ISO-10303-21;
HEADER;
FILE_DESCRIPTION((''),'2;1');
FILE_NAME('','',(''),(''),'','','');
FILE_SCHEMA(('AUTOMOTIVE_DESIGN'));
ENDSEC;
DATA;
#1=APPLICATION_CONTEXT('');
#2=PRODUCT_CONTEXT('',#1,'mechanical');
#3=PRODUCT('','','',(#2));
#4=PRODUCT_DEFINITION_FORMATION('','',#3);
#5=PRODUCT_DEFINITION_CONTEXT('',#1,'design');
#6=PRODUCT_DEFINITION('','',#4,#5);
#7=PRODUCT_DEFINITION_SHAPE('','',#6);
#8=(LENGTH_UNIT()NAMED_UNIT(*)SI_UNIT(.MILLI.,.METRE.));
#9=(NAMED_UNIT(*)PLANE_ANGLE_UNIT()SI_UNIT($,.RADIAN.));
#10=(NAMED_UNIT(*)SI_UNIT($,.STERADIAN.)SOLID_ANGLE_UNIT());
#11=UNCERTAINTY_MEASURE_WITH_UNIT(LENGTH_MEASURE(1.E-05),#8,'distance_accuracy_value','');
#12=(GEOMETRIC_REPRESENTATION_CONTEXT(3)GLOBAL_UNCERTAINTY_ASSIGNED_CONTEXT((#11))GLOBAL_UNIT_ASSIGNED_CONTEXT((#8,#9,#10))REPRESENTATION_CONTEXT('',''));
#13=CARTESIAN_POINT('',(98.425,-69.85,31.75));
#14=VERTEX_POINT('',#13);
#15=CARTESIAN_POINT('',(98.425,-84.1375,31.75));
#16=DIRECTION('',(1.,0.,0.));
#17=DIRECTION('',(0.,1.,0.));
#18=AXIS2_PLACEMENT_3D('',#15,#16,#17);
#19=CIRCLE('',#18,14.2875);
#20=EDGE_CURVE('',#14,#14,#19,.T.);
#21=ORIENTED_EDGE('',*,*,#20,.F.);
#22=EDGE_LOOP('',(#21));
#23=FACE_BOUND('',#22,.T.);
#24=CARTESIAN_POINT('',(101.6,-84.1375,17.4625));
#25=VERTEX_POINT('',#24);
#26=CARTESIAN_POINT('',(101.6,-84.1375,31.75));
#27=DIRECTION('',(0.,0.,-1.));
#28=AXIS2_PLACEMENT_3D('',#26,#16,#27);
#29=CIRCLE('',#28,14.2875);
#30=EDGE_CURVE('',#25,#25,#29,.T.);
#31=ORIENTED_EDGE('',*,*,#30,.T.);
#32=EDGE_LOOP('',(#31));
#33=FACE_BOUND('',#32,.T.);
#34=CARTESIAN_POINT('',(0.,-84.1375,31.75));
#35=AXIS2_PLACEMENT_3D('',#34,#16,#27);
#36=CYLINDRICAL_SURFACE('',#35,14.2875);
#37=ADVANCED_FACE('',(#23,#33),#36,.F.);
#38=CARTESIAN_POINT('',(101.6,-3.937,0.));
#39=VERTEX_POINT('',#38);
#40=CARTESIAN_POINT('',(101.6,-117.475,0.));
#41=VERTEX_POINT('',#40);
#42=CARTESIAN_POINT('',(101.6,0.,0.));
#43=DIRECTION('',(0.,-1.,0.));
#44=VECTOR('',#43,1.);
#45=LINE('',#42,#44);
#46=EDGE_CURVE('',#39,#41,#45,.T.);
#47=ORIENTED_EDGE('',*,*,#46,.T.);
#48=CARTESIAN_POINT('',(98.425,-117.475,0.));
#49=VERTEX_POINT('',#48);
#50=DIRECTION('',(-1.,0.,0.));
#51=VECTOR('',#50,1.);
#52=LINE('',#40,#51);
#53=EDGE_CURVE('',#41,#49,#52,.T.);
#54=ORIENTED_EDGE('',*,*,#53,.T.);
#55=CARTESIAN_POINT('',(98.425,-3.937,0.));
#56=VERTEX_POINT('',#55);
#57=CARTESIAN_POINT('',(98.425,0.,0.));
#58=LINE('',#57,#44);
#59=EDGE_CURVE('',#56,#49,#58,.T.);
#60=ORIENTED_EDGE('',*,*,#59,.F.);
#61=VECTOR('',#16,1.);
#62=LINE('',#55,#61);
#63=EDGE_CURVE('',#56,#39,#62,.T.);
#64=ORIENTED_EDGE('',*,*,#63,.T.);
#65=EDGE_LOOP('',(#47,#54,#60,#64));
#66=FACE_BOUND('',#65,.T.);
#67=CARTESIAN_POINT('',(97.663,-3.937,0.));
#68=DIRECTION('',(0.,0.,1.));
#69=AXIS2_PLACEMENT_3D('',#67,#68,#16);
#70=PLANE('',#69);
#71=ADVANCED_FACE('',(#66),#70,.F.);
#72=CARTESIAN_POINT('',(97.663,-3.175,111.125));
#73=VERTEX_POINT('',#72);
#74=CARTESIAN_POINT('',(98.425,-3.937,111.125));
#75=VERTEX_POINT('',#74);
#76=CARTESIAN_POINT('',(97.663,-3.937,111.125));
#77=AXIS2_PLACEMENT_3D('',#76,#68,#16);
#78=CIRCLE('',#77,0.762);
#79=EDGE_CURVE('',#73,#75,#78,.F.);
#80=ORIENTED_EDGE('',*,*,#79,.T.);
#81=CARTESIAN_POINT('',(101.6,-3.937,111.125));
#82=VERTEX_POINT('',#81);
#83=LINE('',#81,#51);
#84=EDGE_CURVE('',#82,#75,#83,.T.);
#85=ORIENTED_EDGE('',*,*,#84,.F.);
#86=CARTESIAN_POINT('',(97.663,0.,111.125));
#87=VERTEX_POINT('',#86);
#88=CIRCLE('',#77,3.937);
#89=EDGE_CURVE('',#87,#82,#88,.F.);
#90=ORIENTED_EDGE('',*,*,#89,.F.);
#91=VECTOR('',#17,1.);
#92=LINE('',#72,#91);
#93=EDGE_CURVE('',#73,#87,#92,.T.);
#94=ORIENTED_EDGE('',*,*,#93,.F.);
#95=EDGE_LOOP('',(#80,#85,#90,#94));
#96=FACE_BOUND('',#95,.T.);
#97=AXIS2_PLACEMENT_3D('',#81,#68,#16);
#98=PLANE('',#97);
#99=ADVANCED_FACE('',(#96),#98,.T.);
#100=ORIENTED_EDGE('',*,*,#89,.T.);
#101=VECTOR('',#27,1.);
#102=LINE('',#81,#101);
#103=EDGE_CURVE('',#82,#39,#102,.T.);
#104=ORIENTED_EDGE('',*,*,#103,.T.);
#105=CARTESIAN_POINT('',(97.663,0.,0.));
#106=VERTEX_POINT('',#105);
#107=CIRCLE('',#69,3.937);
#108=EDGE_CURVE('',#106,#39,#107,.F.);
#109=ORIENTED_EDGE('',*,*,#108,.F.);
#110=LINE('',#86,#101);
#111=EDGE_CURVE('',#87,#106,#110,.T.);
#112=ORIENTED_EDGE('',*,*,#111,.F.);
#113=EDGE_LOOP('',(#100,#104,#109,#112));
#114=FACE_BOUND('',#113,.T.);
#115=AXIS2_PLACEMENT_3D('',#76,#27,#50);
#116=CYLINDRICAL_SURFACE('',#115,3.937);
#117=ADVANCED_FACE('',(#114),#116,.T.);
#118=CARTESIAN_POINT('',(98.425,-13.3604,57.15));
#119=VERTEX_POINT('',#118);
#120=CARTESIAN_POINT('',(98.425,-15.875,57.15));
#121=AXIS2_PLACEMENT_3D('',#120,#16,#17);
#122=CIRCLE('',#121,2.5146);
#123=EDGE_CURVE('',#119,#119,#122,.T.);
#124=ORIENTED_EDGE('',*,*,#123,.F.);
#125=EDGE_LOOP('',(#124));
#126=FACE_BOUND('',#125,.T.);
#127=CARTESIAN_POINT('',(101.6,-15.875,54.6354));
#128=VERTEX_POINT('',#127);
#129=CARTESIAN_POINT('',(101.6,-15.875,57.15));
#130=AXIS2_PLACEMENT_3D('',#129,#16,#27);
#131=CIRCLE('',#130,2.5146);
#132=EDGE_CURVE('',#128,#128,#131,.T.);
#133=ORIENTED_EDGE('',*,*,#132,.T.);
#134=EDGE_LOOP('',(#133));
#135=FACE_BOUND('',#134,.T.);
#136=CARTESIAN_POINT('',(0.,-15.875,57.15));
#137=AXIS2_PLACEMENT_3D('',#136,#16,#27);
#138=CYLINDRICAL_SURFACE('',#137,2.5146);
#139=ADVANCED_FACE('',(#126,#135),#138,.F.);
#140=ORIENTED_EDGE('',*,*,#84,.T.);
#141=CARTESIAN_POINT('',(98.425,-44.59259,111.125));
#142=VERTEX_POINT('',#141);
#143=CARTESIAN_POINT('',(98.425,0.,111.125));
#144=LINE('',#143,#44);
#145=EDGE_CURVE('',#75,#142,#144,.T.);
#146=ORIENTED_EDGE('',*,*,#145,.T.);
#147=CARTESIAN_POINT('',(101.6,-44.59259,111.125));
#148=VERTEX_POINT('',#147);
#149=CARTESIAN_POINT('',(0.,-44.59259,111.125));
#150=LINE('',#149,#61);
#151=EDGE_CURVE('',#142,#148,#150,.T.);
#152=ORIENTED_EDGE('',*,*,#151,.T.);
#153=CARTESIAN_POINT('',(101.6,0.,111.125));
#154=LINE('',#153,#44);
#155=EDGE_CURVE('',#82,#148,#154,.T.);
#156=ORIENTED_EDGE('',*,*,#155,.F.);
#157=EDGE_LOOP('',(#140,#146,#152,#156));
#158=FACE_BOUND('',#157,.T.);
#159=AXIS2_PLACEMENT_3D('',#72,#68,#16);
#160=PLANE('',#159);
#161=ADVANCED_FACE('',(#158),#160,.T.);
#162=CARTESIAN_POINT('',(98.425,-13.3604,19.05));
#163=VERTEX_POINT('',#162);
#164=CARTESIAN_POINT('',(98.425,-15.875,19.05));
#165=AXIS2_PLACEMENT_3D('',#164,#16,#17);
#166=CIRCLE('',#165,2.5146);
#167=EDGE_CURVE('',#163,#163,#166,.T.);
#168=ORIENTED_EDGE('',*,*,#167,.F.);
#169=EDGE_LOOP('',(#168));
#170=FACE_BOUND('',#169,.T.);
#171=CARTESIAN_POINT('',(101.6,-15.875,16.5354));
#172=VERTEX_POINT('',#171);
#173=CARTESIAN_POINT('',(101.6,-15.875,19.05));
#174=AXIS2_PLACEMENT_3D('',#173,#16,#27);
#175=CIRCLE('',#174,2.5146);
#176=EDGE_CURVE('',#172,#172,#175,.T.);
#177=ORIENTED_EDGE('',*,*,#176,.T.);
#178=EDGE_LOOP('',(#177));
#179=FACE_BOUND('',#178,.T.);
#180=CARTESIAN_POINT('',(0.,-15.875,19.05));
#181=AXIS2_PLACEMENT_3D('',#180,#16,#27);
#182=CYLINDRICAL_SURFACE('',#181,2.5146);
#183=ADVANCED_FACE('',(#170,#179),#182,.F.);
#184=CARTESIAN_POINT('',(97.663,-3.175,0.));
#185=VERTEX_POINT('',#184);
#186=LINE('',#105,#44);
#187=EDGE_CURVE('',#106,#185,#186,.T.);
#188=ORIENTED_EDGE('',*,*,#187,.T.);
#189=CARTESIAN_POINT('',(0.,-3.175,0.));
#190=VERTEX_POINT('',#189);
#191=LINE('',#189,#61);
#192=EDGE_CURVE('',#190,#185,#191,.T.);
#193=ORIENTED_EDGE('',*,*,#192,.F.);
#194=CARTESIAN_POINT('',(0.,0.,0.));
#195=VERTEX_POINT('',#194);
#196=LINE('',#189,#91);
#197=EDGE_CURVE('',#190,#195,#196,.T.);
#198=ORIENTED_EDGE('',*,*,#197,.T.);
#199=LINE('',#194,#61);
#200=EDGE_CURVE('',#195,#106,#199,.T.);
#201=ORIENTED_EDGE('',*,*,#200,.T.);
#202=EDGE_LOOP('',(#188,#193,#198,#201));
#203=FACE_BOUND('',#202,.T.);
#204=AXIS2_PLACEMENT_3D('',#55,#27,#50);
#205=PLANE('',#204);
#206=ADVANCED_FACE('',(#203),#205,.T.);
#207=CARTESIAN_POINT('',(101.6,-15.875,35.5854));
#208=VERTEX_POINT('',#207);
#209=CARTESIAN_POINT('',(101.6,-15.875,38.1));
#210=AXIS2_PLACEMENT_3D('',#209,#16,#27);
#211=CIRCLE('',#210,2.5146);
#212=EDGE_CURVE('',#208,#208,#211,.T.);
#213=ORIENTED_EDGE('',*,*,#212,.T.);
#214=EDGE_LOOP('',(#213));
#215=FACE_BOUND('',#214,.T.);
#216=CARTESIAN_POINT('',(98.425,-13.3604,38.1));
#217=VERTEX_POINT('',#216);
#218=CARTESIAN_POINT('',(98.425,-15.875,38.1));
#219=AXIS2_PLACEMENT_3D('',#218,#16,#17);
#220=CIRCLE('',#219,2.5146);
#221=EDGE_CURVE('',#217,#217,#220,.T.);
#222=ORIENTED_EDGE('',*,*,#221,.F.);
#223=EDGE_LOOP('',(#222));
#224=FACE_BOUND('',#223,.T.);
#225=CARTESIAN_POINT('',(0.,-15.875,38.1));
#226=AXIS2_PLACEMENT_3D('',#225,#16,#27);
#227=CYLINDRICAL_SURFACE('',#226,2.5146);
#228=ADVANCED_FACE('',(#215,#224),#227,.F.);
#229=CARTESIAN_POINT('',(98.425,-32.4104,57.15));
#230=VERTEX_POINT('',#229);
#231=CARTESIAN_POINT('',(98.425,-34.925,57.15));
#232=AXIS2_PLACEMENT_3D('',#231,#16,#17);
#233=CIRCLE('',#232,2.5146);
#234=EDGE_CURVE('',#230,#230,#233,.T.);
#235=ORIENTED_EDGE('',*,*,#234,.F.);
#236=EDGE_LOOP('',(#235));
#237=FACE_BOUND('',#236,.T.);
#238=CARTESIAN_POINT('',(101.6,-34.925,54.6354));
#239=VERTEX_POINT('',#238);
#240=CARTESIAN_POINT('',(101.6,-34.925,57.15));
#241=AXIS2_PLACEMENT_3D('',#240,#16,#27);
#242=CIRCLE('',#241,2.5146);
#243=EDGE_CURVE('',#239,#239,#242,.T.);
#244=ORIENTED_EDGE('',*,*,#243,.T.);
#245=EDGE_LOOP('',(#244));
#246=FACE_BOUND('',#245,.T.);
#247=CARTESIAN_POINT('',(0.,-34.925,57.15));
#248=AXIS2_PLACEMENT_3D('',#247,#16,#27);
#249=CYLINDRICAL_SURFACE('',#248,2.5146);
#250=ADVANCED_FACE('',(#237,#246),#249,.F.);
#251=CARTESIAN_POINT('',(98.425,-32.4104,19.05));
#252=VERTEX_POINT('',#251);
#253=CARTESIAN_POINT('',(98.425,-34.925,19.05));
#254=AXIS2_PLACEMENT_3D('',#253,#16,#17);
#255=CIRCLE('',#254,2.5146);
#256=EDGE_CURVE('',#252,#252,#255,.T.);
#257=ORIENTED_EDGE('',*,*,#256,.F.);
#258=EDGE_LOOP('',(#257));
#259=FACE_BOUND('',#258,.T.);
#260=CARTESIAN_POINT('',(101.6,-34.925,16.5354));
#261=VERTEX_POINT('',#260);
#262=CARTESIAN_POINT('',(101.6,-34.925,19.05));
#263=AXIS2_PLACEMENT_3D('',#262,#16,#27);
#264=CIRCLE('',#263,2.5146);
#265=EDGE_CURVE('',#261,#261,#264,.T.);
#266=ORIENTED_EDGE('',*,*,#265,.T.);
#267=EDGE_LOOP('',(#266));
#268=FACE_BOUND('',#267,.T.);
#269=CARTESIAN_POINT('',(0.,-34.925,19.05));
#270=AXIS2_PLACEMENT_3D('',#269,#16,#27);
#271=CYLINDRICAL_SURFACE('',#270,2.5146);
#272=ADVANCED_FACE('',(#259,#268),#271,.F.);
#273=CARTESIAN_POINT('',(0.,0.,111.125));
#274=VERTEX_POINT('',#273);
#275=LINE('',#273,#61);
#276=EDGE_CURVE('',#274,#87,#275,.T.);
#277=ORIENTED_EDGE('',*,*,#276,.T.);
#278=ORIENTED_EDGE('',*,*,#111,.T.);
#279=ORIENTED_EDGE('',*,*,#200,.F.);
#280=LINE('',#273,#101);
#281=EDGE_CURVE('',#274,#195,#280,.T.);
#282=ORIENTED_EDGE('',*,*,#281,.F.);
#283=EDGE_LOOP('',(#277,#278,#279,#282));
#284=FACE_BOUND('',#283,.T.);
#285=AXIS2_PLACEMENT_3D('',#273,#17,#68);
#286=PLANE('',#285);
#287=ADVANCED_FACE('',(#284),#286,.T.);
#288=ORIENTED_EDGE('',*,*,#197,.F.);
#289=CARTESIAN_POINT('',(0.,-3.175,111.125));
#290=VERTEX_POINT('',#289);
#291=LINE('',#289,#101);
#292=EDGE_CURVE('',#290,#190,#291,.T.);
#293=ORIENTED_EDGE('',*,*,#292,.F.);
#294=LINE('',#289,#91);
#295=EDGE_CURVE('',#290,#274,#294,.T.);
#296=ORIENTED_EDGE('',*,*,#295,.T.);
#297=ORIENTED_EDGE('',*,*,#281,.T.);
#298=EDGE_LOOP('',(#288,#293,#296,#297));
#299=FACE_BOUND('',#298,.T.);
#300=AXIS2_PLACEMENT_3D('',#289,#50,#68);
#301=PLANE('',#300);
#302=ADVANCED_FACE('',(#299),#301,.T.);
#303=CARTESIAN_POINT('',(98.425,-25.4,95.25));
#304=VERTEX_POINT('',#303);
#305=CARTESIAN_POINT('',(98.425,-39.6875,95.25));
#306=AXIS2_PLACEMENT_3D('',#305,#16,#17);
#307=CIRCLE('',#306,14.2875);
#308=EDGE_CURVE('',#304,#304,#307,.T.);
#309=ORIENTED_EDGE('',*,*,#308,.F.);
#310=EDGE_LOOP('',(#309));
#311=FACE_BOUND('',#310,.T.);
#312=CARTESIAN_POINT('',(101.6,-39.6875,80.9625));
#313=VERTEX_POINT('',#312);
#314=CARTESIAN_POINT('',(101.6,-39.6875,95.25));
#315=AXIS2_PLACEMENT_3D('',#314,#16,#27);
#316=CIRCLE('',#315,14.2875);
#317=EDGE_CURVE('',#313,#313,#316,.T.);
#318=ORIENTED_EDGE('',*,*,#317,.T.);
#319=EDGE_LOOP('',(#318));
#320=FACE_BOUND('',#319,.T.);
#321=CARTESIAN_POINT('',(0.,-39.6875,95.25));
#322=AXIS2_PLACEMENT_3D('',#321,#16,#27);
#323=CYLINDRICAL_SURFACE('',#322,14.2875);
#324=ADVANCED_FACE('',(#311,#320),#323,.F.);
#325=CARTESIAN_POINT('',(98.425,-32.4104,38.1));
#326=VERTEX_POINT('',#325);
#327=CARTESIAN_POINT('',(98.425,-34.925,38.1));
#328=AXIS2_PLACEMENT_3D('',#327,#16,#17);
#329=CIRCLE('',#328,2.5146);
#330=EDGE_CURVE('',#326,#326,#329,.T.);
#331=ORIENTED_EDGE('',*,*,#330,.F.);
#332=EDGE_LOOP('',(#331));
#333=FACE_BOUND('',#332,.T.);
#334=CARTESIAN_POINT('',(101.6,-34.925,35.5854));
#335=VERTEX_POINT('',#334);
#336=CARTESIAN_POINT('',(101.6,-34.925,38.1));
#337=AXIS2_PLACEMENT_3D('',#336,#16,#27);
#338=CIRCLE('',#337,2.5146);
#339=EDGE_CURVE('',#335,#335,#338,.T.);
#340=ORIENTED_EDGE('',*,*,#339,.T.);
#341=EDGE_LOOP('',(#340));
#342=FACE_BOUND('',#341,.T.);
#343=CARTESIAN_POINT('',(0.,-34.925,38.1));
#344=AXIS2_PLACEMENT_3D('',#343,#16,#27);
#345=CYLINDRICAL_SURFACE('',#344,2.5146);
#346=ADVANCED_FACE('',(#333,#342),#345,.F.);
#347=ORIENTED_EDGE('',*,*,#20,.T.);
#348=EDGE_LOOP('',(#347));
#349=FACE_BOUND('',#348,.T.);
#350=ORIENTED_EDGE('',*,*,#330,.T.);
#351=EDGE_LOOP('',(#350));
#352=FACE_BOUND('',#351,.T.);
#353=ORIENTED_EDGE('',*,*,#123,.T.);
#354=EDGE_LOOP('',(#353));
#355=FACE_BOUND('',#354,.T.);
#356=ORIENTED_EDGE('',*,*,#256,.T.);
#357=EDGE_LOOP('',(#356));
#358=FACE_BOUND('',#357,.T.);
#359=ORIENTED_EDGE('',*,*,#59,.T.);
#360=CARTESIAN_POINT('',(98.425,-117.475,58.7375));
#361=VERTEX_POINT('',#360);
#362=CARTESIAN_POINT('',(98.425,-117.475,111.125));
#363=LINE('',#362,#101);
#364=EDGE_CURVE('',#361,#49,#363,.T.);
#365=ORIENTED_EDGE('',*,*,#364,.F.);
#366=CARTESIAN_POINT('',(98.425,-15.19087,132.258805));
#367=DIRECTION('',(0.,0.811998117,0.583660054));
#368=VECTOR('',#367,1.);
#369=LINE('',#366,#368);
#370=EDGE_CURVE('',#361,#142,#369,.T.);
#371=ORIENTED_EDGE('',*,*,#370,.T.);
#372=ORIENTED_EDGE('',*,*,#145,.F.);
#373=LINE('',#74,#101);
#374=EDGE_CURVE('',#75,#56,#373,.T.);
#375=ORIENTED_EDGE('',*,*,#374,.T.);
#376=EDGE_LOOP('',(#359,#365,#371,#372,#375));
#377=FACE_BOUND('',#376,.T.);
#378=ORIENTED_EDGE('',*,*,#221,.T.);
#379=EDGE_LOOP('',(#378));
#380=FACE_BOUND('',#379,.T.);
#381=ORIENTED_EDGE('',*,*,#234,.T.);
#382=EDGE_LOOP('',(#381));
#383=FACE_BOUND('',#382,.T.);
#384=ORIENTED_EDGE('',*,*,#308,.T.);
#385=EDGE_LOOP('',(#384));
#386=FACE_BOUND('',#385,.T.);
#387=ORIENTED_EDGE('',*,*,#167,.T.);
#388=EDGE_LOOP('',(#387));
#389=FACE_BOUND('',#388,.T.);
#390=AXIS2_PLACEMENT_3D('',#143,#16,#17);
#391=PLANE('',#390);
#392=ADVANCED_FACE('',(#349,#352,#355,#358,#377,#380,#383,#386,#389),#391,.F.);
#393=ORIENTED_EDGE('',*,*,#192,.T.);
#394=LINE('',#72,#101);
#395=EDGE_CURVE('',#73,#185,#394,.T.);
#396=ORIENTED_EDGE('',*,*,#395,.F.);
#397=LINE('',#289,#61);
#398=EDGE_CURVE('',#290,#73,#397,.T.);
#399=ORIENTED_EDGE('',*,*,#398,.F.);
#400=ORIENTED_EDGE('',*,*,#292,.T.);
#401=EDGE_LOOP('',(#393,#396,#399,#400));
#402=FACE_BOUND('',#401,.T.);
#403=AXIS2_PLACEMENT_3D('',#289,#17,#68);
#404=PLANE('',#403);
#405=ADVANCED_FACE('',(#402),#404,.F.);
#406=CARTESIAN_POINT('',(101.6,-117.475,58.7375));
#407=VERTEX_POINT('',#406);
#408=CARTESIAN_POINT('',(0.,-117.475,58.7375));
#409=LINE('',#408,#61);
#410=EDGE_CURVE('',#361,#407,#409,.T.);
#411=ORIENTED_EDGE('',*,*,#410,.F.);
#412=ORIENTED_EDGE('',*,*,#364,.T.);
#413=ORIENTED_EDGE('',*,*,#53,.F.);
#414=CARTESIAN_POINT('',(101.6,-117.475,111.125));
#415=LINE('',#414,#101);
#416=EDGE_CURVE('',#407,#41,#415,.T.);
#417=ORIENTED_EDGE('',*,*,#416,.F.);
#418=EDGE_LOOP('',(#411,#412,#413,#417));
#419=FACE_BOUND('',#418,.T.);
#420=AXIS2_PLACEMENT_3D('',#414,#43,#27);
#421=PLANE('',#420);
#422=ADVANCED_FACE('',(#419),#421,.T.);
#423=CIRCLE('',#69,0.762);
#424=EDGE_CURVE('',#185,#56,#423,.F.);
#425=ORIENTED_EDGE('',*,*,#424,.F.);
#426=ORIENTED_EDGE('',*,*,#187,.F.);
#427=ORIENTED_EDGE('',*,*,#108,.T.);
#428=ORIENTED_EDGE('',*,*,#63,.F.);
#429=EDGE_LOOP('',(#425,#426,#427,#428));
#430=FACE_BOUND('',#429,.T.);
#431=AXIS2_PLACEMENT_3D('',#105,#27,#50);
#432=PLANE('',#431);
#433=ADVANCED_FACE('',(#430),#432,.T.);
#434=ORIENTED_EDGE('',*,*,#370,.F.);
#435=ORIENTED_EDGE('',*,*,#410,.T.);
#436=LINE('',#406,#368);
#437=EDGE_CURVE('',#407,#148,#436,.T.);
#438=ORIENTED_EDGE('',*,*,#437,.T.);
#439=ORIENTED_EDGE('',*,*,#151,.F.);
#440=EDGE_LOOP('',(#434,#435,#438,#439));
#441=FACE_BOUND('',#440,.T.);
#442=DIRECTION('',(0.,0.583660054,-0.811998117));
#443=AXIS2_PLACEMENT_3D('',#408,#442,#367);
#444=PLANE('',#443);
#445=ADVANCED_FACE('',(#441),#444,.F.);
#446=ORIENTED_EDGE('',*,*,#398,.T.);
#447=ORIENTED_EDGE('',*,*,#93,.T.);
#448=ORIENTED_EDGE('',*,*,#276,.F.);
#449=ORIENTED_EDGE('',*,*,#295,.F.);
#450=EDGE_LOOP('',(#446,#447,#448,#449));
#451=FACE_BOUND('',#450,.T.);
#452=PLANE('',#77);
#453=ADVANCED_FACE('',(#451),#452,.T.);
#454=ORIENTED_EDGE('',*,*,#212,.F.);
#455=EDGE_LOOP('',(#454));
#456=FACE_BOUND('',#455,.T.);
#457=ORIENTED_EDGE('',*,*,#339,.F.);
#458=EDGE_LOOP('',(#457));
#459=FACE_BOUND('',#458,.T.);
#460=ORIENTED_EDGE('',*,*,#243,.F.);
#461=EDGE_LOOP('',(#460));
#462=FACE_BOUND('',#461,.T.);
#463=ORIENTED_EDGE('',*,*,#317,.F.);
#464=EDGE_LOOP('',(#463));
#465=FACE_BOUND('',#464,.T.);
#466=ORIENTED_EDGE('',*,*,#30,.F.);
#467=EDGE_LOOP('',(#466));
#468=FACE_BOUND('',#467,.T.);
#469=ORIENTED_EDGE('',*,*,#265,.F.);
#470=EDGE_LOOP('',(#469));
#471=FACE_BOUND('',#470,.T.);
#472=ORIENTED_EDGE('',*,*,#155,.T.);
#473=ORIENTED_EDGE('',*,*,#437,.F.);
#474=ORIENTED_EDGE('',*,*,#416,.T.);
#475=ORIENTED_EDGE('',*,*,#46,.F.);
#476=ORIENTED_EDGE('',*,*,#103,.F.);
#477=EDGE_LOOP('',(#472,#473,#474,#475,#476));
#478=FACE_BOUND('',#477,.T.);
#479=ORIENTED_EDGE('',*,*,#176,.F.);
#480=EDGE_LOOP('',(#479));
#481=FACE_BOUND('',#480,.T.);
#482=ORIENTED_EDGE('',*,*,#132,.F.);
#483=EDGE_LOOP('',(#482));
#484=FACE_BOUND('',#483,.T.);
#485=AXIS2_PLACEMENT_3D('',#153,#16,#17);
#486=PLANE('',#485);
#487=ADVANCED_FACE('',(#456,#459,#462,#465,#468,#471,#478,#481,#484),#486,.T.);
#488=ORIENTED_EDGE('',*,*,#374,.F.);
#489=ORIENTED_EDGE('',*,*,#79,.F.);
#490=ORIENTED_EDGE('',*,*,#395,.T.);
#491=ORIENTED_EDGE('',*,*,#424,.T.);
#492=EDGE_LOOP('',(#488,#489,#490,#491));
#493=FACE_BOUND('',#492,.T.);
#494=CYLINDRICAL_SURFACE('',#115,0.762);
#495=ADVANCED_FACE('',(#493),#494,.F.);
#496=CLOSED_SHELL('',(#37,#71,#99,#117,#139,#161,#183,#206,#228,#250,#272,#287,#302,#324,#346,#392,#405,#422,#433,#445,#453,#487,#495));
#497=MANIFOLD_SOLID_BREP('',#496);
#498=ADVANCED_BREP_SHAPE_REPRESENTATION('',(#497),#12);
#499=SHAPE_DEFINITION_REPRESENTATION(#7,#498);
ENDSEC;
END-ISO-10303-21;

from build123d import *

# Parameters (mm, degrees)
BASE_FLANGE1_DEPTH = 111.125
SKETCH16_R         = 14.2875
SKETCH16_R_2       = 2.5146
CUT_EXTRUDE1_DEPTH = 191.975656171


# Read off the part's stored shape, not the designer's step: Base-Flange1
with BuildPart() as part:
    # Base-Flange1 outline → Base-Flange1 (new body)
    with BuildSketch(Plane.XY):
        with BuildLine():
            Line((98.425, -3.937), (98.425, -117.475))
            Line((98.425, -117.475), (101.6, -117.475))
            Line((101.6, -117.475), (101.6, -3.937))
            ThreePointArc((101.6, -3.937), (100.446879398, -1.153120602), (97.663, 0))
            Line((97.663, 0), (0, 0))
            Line((0, 0), (0, -3.175))
            Line((0, -3.175), (97.663, -3.175))
            ThreePointArc((97.663, -3.175), (98.201815367, -3.398184633), (98.425, -3.937))
        make_face()
    extrude(amount=BASE_FLANGE1_DEPTH)

    # Sketch16 → Cut-Extrude1 (cut, through all)
    with BuildSketch(Plane(origin=(101.6, 0, 0), x_dir=(0, 0, -1), z_dir=(1, 0, 0))):
        with Locations((-31.75, -84.1375)):
            Circle(SKETCH16_R)
        with Locations((-95.25, -39.6875)):
            Circle(SKETCH16_R)
        with Locations((-38.1, -15.875)):
            Circle(SKETCH16_R_2)
        with Locations((-38.1, -34.925)):
            Circle(SKETCH16_R_2)
        with Locations((-57.15, -15.875)):
            Circle(SKETCH16_R_2)
        with Locations((-57.15, -34.925)):
            Circle(SKETCH16_R_2)
        with Locations((-19.05, -15.875)):
            Circle(SKETCH16_R_2)
        with Locations((-19.05, -34.925)):
            Circle(SKETCH16_R_2)
        Polygon((-58.7375, -117.475), (-111.125, -44.592589994), (-111.125, -117.475), align=None)
    extrude(amount=-CUT_EXTRUDE1_DEPTH, mode=Mode.SUBTRACT)


solid = part.part
